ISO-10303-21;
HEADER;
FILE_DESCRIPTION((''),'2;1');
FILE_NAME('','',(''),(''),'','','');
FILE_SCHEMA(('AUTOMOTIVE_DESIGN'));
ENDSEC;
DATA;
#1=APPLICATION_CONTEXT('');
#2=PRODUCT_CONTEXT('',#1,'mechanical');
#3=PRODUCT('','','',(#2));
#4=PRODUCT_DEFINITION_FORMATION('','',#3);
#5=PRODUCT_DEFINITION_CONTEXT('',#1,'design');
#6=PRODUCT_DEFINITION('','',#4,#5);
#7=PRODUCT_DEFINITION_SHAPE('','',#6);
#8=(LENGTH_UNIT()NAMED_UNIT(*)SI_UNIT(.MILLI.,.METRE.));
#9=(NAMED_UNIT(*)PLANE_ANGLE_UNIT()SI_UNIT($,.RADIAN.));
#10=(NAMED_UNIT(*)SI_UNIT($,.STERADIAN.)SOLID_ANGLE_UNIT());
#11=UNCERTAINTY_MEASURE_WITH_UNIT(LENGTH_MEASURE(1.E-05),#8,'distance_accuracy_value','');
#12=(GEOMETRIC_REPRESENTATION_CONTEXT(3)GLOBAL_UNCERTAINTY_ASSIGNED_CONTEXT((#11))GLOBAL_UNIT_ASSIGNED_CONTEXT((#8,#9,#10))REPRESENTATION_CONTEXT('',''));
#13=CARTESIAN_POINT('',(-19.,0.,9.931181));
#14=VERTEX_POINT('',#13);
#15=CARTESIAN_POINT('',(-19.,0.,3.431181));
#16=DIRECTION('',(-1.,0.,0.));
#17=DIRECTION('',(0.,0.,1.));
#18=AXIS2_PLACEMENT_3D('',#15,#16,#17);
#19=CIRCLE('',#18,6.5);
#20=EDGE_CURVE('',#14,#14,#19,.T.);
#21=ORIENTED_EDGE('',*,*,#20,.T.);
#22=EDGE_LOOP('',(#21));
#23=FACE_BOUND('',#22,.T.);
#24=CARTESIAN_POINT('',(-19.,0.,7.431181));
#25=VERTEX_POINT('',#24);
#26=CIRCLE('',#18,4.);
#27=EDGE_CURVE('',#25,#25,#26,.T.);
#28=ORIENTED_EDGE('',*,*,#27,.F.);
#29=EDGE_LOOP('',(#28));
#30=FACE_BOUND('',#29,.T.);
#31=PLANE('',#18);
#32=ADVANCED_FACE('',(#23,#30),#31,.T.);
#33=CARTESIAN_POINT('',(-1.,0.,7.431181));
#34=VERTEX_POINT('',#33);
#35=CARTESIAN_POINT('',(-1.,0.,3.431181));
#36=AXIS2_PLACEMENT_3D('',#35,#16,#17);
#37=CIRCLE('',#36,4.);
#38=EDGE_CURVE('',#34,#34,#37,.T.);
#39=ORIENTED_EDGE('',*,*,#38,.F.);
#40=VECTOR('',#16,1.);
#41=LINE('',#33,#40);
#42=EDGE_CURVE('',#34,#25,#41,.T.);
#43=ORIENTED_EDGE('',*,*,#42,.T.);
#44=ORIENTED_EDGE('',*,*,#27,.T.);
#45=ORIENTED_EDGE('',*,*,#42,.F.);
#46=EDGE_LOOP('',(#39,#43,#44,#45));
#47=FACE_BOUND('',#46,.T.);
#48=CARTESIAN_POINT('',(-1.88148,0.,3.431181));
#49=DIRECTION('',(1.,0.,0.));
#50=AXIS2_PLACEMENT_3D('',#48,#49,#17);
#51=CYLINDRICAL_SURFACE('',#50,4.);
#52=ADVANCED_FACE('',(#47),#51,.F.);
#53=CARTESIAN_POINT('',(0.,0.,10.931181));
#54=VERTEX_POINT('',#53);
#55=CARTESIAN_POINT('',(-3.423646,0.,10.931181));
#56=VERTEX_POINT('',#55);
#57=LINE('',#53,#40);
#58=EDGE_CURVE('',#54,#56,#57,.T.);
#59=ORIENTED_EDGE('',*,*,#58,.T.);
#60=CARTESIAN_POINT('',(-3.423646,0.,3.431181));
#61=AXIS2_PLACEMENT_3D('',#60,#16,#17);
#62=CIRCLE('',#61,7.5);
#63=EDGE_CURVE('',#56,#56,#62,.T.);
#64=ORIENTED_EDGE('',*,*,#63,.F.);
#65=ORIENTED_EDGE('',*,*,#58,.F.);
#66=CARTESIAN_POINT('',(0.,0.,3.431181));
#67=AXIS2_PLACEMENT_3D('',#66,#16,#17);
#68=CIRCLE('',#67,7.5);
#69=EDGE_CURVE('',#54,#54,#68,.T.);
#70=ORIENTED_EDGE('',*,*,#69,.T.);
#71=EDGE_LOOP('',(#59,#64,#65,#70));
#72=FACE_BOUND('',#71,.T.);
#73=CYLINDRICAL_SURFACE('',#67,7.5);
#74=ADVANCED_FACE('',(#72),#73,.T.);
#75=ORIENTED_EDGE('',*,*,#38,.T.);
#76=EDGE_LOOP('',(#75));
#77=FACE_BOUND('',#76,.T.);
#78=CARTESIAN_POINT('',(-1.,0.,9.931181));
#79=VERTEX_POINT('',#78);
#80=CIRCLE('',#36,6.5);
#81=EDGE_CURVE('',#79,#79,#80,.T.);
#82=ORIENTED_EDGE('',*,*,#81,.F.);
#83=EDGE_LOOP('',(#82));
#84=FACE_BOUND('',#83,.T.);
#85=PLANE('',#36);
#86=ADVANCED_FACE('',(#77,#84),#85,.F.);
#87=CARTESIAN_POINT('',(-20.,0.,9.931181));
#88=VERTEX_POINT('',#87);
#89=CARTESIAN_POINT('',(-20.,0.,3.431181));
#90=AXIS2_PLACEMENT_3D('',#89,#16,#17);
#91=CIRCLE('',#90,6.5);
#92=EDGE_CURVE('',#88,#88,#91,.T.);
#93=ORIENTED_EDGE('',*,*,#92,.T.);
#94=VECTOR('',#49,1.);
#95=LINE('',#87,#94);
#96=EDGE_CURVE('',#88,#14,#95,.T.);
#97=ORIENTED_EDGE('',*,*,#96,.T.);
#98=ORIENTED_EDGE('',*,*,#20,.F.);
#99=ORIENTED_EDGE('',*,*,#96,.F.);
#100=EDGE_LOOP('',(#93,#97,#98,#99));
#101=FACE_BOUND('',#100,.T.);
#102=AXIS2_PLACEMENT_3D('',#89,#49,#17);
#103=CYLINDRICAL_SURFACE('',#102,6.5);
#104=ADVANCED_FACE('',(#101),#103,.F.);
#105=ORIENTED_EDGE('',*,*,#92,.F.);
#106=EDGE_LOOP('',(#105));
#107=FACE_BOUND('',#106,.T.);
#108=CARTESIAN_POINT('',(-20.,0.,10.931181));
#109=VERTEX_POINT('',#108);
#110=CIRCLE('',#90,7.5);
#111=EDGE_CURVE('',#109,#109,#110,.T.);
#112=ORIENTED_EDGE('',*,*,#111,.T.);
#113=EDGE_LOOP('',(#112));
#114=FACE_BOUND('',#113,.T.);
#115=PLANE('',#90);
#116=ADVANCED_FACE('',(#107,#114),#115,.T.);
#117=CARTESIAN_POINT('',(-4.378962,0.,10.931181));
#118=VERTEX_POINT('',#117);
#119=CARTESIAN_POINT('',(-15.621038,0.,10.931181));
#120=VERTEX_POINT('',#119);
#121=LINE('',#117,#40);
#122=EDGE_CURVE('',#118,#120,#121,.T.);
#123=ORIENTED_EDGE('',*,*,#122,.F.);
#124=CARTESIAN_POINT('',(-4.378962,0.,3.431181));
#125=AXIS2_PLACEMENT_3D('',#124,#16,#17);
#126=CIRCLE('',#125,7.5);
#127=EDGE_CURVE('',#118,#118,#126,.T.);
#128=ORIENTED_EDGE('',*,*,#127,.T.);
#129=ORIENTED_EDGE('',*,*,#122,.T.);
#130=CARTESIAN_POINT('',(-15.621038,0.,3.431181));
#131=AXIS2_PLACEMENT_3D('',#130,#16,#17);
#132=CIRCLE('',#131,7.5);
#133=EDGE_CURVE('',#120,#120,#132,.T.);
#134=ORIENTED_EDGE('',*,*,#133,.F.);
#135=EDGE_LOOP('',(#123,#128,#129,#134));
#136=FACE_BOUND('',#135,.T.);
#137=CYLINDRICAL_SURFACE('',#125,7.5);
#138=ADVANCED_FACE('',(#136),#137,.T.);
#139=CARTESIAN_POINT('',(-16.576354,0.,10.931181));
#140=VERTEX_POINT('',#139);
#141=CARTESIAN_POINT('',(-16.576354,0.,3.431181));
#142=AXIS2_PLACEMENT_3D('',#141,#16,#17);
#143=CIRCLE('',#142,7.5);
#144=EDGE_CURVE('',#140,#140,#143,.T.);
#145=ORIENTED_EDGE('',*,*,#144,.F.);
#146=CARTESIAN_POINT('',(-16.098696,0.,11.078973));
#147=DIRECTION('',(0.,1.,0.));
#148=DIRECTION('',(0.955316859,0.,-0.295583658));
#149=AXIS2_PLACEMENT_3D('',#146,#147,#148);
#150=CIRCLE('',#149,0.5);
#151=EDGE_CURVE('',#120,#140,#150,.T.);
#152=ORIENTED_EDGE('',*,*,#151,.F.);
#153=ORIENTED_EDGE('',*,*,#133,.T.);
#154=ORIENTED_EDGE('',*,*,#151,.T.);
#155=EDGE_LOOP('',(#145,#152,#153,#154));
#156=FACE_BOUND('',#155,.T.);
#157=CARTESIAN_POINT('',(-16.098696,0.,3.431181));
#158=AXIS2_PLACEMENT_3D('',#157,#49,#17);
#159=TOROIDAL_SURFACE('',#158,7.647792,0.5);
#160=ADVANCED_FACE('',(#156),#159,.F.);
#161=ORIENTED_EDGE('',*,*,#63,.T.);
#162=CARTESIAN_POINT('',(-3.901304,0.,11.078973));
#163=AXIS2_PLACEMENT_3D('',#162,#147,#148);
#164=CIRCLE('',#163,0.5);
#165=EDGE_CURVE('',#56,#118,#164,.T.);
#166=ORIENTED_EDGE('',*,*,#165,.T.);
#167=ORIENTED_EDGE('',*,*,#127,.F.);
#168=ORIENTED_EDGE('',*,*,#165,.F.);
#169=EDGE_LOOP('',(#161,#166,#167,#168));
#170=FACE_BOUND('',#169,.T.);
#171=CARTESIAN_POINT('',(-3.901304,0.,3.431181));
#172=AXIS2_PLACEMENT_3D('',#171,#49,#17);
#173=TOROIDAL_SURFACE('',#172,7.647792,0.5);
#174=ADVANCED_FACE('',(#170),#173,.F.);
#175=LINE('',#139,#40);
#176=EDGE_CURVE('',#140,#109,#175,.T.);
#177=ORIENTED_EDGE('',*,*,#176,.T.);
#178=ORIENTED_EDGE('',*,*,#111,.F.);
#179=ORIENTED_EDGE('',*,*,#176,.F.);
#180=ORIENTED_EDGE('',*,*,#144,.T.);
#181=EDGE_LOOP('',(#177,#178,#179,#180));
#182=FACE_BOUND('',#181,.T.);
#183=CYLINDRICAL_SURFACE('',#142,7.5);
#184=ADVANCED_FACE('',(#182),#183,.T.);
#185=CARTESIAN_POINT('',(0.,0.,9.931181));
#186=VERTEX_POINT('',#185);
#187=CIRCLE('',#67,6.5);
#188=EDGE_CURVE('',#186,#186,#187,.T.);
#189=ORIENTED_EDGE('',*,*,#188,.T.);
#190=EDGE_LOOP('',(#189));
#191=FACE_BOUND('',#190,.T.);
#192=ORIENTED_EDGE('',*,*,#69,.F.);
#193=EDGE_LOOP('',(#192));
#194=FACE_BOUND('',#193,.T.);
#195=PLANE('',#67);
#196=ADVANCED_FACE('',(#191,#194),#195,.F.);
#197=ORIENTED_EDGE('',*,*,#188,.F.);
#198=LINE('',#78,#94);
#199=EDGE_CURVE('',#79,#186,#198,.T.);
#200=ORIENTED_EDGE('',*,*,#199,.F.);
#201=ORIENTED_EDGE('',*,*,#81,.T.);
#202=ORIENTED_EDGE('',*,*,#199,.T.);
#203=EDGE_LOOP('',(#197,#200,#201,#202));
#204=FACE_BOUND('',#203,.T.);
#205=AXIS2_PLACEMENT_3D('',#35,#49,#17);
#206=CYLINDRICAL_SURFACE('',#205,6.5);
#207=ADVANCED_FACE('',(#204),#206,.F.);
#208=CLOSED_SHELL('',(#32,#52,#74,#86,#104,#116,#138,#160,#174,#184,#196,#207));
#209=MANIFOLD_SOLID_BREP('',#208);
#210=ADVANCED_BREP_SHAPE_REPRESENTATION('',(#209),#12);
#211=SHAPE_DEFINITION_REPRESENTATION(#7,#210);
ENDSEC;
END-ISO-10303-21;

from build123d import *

# Parameters (mm, degrees)
F2_DEPTH = 25


# Not quite as in the source:
# - a feature names something its author has since deleted; it is built from what else it names


with BuildPart() as f1:
    # F0 (on Front) → F1 (revolve)
    with BuildSketch(Plane.XZ):
        with BuildLine():
            Line((0, 9.9311807901), (0, 10.9311807901))
            Line((0, 10.9311807901), (-3.4236455734, 10.9311807901))
            ThreePointArc((-3.4236455734, 10.9311807901), (-3.9013040029, 10.5789726191), (-4.3789624324, 10.9311807901))
            Line((-4.3789624324, 10.9311807901), (-15.6210375676, 10.9311807901))
            ThreePointArc((-15.6210375676, 10.9311807901), (-16.0986959971, 10.5789726191), (-16.5763544266, 10.9311807901))
            Line((-16.5763544266, 10.9311807901), (-20, 10.9311807901))
            Line((-20, 10.9311807901), (-20, 9.9311807901))
            Line((-20, 9.9311807901), (-19, 9.9311807901))
            Line((-19, 9.9311807901), (-19, 7.4311807901))
            Line((-19, 7.4311807901), (-18.118519783, 7.4311807901))
            Line((-18.118519783, 7.4311807901), (-18.118519783, 3.4311807901))
            Line((-18.118519783, 3.4311807901), (-1.881480217, 3.4311807901))
            Line((-1.881480217, 3.4311807901), (-1.881480217, 7.4311807901))
            Line((-1.881480217, 7.4311807901), (-1, 7.4311807901))
            Line((-1, 7.4311807901), (-1, 9.9311807901))
            Line((-1, 9.9311807901), (0, 9.9311807901))
        make_face()
    revolve(axis=Axis((-10, 0, 3.4311807901), (-1, 0, 0)))

    # F2 (cut): a face of the model
    f2_faces = [f1.faces().sort_by_distance(p)[0] for p in [
        (-18.118519783, 0, 3.4311807901),
    ]]
    extrude(f2_faces, amount=-F2_DEPTH, mode=Mode.SUBTRACT)


solid = f1.part
